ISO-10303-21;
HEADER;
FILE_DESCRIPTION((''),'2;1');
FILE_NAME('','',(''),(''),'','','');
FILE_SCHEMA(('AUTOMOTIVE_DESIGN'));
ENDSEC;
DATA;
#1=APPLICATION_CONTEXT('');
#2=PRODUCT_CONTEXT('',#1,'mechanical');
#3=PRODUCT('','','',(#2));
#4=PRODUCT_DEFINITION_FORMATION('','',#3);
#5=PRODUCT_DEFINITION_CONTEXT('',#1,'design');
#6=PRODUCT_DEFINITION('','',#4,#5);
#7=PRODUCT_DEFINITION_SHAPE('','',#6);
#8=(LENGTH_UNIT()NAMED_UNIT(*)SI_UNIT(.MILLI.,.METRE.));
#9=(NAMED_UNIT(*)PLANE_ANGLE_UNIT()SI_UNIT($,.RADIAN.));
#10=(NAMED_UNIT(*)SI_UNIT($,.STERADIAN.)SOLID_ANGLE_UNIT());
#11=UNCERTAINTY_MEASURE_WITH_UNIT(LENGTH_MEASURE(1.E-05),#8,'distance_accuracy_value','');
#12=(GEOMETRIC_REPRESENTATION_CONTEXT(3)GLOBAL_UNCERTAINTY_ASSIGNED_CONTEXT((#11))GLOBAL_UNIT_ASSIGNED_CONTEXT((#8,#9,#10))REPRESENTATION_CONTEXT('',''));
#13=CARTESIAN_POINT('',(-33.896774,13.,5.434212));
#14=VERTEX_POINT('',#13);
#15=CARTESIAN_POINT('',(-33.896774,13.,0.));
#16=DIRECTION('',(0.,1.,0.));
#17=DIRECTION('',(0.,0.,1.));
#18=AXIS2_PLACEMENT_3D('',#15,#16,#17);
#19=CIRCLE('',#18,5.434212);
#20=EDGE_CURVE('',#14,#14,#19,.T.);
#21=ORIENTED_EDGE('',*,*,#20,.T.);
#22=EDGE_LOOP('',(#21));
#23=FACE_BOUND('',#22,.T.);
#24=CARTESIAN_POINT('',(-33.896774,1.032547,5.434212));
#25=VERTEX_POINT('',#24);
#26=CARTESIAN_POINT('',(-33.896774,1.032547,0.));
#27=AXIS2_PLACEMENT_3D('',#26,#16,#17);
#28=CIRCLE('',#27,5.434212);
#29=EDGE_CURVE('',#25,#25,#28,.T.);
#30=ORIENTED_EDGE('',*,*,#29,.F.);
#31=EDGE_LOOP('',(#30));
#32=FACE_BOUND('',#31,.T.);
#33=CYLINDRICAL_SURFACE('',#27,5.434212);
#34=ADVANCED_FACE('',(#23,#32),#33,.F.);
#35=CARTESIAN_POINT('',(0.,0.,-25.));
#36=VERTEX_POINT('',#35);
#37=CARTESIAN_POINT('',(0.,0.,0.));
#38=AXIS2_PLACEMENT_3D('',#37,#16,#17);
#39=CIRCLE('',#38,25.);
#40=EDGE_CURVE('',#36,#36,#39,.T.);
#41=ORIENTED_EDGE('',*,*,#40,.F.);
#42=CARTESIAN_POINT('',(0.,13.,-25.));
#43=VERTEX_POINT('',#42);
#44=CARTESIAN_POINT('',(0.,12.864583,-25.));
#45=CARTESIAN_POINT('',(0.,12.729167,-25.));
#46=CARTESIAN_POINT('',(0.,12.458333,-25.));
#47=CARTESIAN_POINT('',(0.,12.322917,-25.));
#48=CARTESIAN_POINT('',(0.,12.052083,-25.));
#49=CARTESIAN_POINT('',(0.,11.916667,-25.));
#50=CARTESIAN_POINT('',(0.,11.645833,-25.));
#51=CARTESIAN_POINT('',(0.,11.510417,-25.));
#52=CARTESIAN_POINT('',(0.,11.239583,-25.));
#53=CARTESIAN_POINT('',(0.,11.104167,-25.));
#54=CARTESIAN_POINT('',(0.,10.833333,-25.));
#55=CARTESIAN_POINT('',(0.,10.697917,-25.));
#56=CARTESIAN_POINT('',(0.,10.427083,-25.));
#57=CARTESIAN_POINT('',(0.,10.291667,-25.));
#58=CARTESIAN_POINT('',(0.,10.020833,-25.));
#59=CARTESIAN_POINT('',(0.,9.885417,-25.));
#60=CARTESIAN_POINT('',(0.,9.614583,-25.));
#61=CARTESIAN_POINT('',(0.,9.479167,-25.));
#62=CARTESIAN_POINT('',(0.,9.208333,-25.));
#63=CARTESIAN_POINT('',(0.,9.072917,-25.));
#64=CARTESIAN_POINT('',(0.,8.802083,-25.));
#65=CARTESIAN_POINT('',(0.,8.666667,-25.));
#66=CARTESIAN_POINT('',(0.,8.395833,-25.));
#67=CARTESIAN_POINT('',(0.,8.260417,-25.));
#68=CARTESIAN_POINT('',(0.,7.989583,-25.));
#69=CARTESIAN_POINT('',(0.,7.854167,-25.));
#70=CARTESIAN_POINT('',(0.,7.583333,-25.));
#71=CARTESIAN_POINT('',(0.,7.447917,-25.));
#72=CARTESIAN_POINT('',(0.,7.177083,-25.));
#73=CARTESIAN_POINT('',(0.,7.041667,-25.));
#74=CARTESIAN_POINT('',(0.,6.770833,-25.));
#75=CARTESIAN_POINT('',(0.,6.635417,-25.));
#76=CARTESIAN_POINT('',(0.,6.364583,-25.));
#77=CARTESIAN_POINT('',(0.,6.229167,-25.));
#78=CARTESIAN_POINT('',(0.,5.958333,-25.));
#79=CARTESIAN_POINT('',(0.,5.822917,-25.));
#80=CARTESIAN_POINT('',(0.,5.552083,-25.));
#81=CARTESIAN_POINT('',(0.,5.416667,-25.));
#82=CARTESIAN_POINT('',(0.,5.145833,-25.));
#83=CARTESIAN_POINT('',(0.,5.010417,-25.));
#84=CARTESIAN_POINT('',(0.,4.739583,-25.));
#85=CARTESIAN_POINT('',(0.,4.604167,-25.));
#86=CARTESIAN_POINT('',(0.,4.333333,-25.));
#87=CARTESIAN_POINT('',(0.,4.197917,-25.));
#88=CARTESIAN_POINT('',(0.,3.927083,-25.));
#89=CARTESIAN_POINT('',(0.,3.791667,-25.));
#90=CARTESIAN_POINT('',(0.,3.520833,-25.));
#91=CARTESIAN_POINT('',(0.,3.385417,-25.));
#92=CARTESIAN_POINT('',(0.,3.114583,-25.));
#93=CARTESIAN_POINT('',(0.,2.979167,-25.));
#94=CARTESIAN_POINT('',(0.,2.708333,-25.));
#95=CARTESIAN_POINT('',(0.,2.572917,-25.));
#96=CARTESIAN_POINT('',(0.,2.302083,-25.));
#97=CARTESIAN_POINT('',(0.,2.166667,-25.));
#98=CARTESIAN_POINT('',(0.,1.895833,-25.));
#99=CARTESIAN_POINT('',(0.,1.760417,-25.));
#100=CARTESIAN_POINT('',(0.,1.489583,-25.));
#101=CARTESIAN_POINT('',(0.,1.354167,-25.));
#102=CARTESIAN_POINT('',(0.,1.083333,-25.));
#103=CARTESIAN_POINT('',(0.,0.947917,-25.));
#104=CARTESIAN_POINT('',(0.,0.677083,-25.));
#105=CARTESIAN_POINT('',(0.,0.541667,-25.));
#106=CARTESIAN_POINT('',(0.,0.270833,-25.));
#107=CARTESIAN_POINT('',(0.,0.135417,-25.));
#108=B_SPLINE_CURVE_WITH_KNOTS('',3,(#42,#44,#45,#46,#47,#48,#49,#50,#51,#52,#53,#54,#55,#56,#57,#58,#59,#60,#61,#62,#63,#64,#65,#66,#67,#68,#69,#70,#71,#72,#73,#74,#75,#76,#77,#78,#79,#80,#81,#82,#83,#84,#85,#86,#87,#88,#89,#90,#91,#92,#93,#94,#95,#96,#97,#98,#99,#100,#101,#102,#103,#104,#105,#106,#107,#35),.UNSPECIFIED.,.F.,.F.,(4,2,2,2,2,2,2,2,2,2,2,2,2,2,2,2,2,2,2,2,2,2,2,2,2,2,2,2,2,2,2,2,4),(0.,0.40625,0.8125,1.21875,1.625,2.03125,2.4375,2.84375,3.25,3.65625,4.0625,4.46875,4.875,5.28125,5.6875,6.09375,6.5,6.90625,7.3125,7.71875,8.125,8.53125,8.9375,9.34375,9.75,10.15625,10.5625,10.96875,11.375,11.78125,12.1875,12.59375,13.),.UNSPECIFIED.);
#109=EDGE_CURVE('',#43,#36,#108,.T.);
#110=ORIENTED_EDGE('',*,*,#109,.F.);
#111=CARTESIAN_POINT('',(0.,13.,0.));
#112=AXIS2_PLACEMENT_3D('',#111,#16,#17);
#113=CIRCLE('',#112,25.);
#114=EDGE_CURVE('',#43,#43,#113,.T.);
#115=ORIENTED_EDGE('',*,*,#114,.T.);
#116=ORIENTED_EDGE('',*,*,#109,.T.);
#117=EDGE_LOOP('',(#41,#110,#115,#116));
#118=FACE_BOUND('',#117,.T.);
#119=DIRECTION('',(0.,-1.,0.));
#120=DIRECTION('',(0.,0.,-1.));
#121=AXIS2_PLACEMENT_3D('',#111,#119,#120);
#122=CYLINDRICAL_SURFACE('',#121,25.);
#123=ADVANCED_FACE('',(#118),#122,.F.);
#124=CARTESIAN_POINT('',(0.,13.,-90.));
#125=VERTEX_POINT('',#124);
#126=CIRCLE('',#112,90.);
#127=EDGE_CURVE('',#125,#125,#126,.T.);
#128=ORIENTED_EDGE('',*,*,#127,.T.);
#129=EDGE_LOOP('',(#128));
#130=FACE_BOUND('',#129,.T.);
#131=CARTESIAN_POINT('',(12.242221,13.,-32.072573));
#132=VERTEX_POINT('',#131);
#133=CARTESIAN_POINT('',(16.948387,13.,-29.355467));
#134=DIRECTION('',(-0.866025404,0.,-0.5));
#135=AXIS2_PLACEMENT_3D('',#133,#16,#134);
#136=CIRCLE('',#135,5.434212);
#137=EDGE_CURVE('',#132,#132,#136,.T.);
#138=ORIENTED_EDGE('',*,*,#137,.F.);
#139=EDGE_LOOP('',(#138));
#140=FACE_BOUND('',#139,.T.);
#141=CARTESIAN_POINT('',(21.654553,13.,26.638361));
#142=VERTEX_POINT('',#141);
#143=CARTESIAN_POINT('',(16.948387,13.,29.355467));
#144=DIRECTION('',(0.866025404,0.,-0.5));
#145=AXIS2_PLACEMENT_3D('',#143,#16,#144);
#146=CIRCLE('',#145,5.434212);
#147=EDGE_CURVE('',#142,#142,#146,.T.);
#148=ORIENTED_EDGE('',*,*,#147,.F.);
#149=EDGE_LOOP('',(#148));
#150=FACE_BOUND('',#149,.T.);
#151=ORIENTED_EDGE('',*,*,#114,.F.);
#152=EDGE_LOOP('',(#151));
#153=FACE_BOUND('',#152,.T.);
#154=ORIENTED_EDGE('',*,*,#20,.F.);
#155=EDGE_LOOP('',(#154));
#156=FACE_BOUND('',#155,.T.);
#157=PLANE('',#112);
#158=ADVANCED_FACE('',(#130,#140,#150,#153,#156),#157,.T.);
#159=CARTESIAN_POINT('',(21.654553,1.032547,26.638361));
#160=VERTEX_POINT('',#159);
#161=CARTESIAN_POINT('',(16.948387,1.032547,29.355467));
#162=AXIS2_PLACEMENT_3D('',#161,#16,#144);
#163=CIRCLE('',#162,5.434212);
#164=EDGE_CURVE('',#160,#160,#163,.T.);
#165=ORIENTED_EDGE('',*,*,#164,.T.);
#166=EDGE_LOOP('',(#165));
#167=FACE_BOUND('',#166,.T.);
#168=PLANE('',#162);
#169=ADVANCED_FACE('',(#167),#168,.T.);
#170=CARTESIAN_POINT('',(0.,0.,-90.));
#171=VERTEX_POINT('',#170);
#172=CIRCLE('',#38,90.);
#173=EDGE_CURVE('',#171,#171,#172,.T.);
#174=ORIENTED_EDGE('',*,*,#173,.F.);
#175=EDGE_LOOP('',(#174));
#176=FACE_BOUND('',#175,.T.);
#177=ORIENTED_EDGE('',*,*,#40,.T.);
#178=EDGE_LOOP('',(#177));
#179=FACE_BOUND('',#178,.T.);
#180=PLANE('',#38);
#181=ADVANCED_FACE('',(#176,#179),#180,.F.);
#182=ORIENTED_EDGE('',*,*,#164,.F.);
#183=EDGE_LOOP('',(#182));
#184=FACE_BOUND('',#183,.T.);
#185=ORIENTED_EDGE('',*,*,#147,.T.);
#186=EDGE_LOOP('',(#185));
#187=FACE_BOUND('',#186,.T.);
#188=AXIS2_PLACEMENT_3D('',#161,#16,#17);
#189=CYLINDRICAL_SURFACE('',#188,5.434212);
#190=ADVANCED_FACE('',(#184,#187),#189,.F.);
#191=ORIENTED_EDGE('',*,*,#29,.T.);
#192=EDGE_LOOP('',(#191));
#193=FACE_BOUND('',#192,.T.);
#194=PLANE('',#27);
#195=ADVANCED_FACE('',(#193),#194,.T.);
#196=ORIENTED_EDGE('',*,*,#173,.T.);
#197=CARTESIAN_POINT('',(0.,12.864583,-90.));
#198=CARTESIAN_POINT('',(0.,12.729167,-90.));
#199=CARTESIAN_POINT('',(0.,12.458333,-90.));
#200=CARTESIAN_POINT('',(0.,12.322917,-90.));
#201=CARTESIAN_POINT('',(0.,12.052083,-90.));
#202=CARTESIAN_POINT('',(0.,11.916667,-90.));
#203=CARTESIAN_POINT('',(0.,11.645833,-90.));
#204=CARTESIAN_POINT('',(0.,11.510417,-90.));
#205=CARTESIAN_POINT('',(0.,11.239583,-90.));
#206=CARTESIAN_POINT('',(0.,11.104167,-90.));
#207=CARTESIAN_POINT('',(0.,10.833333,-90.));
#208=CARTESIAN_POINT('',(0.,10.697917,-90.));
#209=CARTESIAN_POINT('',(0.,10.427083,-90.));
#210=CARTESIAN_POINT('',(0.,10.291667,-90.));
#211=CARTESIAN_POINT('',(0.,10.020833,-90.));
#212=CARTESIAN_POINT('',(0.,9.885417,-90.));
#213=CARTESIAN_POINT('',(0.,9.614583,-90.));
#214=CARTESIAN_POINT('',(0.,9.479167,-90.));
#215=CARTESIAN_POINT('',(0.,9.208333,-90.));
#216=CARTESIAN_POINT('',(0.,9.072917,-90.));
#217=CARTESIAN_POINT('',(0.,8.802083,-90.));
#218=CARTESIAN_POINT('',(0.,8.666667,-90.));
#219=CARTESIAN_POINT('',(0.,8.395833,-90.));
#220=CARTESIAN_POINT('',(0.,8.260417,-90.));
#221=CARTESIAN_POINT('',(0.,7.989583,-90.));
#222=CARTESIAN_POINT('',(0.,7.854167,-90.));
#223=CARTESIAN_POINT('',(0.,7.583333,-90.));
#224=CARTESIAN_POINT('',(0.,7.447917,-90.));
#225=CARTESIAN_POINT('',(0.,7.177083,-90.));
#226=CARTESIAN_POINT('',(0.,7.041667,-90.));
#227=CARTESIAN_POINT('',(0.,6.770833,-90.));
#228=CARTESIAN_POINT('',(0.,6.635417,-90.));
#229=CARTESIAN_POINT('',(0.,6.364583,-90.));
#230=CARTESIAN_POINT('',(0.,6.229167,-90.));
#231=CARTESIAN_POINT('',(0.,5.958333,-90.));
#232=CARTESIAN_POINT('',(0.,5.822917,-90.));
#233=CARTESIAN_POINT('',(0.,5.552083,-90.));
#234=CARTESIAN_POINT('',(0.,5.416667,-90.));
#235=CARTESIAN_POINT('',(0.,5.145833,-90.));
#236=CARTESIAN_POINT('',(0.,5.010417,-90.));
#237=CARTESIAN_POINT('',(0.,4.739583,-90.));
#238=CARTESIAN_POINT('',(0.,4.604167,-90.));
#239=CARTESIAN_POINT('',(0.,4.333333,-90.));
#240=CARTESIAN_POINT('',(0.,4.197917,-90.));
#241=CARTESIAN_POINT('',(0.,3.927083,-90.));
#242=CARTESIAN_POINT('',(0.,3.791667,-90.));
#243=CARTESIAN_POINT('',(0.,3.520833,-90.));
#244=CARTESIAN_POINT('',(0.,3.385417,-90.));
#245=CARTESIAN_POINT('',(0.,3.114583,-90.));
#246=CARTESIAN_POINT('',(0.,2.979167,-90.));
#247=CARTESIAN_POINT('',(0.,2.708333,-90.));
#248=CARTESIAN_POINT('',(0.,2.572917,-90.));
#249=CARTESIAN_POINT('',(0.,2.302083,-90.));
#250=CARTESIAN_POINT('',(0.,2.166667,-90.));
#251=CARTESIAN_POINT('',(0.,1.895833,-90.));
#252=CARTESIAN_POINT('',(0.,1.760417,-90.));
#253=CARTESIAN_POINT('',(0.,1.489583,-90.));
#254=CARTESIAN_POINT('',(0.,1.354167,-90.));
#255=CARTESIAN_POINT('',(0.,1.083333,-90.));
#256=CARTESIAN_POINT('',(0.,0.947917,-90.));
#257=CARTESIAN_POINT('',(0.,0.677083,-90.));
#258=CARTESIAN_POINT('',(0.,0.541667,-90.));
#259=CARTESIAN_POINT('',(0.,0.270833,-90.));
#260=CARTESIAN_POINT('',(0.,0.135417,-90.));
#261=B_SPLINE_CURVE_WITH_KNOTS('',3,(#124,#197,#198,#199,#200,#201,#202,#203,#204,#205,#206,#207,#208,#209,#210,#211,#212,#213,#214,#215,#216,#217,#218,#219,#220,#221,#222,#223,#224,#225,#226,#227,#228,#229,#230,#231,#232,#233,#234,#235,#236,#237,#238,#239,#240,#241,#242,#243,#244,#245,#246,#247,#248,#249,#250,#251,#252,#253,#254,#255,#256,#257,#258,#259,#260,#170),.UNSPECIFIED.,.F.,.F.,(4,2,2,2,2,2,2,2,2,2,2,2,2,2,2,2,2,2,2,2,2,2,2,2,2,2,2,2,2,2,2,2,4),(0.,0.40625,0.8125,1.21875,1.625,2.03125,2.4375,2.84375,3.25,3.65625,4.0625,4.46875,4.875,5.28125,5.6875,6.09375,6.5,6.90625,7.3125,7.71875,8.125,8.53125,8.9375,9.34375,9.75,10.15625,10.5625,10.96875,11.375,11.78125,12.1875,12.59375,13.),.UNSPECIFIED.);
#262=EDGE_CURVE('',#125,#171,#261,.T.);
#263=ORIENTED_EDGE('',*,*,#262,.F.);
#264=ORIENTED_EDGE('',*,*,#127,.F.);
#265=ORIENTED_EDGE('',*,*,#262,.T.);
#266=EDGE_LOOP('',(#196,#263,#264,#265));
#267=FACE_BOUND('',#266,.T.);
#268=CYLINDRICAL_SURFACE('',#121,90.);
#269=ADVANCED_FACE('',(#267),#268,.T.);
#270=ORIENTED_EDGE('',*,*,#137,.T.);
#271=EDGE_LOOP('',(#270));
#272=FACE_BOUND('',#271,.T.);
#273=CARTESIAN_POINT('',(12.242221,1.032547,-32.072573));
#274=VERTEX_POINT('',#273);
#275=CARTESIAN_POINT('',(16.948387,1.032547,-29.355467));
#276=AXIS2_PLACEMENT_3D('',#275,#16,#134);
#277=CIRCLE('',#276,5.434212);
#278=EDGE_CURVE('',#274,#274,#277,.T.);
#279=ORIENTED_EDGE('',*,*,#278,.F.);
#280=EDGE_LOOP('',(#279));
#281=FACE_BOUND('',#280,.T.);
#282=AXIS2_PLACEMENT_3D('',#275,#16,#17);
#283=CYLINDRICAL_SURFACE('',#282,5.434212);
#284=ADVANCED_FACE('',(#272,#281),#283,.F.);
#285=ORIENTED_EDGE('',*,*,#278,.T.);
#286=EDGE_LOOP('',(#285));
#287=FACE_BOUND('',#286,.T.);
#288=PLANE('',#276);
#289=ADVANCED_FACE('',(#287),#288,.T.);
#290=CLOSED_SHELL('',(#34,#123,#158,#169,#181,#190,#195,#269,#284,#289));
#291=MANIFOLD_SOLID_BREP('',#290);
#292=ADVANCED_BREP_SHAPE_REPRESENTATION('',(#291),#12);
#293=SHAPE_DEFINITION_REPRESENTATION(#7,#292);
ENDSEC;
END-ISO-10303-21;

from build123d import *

# Parameters (mm, degrees)
SKETCH1_R           = 90
BOSS_EXTRUDE1_DEPTH = 13
SKETCH2_R           = 25
CUT_EXTRUDE1_DEPTH  = 128.941392833
SKETCH3_R           = 5.434212322
CUT_EXTRUDE2_DEPTH  = 11.967453468
CIRPATTERN1_COUNT   = 3


with BuildPart() as part:
    # Sketch1 → Boss-Extrude1 (new body)
    with BuildSketch(Plane(origin=(0, 0, 0), x_dir=(1, 0, 0), z_dir=(0, 1, 0))):
        Circle(SKETCH1_R)
    extrude(amount=BOSS_EXTRUDE1_DEPTH)

    # Sketch2 → Cut-Extrude1 (cut, through all)
    with BuildSketch(Plane(origin=(0, 0, 0), x_dir=(1, 0, 0), z_dir=(0, 1, 0))):
        Circle(SKETCH2_R)
    extrude(amount=CUT_EXTRUDE1_DEPTH, mode=Mode.SUBTRACT)

    # Sketch3 → Cut-Extrude2 (cut)
    with BuildSketch(Plane(origin=(0, 13, 0), x_dir=(1, 0, 0), z_dir=(0, 1, 0))):
        with Locations((-33.896773813, 0)):
            Circle(SKETCH3_R)
    cut_extrude2 = extrude(amount=-CUT_EXTRUDE2_DEPTH, mode=Mode.SUBTRACT)

    # CirPattern1: Cut-Extrude2 ×3 about axis
    cirpattern1_axis = Axis((0, 0, 0), (0, 1, 0))
    for i in range(1, CIRPATTERN1_COUNT):
        add(cut_extrude2.rotate(cirpattern1_axis, i * 360 / CIRPATTERN1_COUNT), mode=Mode.SUBTRACT)


solid = part.part
